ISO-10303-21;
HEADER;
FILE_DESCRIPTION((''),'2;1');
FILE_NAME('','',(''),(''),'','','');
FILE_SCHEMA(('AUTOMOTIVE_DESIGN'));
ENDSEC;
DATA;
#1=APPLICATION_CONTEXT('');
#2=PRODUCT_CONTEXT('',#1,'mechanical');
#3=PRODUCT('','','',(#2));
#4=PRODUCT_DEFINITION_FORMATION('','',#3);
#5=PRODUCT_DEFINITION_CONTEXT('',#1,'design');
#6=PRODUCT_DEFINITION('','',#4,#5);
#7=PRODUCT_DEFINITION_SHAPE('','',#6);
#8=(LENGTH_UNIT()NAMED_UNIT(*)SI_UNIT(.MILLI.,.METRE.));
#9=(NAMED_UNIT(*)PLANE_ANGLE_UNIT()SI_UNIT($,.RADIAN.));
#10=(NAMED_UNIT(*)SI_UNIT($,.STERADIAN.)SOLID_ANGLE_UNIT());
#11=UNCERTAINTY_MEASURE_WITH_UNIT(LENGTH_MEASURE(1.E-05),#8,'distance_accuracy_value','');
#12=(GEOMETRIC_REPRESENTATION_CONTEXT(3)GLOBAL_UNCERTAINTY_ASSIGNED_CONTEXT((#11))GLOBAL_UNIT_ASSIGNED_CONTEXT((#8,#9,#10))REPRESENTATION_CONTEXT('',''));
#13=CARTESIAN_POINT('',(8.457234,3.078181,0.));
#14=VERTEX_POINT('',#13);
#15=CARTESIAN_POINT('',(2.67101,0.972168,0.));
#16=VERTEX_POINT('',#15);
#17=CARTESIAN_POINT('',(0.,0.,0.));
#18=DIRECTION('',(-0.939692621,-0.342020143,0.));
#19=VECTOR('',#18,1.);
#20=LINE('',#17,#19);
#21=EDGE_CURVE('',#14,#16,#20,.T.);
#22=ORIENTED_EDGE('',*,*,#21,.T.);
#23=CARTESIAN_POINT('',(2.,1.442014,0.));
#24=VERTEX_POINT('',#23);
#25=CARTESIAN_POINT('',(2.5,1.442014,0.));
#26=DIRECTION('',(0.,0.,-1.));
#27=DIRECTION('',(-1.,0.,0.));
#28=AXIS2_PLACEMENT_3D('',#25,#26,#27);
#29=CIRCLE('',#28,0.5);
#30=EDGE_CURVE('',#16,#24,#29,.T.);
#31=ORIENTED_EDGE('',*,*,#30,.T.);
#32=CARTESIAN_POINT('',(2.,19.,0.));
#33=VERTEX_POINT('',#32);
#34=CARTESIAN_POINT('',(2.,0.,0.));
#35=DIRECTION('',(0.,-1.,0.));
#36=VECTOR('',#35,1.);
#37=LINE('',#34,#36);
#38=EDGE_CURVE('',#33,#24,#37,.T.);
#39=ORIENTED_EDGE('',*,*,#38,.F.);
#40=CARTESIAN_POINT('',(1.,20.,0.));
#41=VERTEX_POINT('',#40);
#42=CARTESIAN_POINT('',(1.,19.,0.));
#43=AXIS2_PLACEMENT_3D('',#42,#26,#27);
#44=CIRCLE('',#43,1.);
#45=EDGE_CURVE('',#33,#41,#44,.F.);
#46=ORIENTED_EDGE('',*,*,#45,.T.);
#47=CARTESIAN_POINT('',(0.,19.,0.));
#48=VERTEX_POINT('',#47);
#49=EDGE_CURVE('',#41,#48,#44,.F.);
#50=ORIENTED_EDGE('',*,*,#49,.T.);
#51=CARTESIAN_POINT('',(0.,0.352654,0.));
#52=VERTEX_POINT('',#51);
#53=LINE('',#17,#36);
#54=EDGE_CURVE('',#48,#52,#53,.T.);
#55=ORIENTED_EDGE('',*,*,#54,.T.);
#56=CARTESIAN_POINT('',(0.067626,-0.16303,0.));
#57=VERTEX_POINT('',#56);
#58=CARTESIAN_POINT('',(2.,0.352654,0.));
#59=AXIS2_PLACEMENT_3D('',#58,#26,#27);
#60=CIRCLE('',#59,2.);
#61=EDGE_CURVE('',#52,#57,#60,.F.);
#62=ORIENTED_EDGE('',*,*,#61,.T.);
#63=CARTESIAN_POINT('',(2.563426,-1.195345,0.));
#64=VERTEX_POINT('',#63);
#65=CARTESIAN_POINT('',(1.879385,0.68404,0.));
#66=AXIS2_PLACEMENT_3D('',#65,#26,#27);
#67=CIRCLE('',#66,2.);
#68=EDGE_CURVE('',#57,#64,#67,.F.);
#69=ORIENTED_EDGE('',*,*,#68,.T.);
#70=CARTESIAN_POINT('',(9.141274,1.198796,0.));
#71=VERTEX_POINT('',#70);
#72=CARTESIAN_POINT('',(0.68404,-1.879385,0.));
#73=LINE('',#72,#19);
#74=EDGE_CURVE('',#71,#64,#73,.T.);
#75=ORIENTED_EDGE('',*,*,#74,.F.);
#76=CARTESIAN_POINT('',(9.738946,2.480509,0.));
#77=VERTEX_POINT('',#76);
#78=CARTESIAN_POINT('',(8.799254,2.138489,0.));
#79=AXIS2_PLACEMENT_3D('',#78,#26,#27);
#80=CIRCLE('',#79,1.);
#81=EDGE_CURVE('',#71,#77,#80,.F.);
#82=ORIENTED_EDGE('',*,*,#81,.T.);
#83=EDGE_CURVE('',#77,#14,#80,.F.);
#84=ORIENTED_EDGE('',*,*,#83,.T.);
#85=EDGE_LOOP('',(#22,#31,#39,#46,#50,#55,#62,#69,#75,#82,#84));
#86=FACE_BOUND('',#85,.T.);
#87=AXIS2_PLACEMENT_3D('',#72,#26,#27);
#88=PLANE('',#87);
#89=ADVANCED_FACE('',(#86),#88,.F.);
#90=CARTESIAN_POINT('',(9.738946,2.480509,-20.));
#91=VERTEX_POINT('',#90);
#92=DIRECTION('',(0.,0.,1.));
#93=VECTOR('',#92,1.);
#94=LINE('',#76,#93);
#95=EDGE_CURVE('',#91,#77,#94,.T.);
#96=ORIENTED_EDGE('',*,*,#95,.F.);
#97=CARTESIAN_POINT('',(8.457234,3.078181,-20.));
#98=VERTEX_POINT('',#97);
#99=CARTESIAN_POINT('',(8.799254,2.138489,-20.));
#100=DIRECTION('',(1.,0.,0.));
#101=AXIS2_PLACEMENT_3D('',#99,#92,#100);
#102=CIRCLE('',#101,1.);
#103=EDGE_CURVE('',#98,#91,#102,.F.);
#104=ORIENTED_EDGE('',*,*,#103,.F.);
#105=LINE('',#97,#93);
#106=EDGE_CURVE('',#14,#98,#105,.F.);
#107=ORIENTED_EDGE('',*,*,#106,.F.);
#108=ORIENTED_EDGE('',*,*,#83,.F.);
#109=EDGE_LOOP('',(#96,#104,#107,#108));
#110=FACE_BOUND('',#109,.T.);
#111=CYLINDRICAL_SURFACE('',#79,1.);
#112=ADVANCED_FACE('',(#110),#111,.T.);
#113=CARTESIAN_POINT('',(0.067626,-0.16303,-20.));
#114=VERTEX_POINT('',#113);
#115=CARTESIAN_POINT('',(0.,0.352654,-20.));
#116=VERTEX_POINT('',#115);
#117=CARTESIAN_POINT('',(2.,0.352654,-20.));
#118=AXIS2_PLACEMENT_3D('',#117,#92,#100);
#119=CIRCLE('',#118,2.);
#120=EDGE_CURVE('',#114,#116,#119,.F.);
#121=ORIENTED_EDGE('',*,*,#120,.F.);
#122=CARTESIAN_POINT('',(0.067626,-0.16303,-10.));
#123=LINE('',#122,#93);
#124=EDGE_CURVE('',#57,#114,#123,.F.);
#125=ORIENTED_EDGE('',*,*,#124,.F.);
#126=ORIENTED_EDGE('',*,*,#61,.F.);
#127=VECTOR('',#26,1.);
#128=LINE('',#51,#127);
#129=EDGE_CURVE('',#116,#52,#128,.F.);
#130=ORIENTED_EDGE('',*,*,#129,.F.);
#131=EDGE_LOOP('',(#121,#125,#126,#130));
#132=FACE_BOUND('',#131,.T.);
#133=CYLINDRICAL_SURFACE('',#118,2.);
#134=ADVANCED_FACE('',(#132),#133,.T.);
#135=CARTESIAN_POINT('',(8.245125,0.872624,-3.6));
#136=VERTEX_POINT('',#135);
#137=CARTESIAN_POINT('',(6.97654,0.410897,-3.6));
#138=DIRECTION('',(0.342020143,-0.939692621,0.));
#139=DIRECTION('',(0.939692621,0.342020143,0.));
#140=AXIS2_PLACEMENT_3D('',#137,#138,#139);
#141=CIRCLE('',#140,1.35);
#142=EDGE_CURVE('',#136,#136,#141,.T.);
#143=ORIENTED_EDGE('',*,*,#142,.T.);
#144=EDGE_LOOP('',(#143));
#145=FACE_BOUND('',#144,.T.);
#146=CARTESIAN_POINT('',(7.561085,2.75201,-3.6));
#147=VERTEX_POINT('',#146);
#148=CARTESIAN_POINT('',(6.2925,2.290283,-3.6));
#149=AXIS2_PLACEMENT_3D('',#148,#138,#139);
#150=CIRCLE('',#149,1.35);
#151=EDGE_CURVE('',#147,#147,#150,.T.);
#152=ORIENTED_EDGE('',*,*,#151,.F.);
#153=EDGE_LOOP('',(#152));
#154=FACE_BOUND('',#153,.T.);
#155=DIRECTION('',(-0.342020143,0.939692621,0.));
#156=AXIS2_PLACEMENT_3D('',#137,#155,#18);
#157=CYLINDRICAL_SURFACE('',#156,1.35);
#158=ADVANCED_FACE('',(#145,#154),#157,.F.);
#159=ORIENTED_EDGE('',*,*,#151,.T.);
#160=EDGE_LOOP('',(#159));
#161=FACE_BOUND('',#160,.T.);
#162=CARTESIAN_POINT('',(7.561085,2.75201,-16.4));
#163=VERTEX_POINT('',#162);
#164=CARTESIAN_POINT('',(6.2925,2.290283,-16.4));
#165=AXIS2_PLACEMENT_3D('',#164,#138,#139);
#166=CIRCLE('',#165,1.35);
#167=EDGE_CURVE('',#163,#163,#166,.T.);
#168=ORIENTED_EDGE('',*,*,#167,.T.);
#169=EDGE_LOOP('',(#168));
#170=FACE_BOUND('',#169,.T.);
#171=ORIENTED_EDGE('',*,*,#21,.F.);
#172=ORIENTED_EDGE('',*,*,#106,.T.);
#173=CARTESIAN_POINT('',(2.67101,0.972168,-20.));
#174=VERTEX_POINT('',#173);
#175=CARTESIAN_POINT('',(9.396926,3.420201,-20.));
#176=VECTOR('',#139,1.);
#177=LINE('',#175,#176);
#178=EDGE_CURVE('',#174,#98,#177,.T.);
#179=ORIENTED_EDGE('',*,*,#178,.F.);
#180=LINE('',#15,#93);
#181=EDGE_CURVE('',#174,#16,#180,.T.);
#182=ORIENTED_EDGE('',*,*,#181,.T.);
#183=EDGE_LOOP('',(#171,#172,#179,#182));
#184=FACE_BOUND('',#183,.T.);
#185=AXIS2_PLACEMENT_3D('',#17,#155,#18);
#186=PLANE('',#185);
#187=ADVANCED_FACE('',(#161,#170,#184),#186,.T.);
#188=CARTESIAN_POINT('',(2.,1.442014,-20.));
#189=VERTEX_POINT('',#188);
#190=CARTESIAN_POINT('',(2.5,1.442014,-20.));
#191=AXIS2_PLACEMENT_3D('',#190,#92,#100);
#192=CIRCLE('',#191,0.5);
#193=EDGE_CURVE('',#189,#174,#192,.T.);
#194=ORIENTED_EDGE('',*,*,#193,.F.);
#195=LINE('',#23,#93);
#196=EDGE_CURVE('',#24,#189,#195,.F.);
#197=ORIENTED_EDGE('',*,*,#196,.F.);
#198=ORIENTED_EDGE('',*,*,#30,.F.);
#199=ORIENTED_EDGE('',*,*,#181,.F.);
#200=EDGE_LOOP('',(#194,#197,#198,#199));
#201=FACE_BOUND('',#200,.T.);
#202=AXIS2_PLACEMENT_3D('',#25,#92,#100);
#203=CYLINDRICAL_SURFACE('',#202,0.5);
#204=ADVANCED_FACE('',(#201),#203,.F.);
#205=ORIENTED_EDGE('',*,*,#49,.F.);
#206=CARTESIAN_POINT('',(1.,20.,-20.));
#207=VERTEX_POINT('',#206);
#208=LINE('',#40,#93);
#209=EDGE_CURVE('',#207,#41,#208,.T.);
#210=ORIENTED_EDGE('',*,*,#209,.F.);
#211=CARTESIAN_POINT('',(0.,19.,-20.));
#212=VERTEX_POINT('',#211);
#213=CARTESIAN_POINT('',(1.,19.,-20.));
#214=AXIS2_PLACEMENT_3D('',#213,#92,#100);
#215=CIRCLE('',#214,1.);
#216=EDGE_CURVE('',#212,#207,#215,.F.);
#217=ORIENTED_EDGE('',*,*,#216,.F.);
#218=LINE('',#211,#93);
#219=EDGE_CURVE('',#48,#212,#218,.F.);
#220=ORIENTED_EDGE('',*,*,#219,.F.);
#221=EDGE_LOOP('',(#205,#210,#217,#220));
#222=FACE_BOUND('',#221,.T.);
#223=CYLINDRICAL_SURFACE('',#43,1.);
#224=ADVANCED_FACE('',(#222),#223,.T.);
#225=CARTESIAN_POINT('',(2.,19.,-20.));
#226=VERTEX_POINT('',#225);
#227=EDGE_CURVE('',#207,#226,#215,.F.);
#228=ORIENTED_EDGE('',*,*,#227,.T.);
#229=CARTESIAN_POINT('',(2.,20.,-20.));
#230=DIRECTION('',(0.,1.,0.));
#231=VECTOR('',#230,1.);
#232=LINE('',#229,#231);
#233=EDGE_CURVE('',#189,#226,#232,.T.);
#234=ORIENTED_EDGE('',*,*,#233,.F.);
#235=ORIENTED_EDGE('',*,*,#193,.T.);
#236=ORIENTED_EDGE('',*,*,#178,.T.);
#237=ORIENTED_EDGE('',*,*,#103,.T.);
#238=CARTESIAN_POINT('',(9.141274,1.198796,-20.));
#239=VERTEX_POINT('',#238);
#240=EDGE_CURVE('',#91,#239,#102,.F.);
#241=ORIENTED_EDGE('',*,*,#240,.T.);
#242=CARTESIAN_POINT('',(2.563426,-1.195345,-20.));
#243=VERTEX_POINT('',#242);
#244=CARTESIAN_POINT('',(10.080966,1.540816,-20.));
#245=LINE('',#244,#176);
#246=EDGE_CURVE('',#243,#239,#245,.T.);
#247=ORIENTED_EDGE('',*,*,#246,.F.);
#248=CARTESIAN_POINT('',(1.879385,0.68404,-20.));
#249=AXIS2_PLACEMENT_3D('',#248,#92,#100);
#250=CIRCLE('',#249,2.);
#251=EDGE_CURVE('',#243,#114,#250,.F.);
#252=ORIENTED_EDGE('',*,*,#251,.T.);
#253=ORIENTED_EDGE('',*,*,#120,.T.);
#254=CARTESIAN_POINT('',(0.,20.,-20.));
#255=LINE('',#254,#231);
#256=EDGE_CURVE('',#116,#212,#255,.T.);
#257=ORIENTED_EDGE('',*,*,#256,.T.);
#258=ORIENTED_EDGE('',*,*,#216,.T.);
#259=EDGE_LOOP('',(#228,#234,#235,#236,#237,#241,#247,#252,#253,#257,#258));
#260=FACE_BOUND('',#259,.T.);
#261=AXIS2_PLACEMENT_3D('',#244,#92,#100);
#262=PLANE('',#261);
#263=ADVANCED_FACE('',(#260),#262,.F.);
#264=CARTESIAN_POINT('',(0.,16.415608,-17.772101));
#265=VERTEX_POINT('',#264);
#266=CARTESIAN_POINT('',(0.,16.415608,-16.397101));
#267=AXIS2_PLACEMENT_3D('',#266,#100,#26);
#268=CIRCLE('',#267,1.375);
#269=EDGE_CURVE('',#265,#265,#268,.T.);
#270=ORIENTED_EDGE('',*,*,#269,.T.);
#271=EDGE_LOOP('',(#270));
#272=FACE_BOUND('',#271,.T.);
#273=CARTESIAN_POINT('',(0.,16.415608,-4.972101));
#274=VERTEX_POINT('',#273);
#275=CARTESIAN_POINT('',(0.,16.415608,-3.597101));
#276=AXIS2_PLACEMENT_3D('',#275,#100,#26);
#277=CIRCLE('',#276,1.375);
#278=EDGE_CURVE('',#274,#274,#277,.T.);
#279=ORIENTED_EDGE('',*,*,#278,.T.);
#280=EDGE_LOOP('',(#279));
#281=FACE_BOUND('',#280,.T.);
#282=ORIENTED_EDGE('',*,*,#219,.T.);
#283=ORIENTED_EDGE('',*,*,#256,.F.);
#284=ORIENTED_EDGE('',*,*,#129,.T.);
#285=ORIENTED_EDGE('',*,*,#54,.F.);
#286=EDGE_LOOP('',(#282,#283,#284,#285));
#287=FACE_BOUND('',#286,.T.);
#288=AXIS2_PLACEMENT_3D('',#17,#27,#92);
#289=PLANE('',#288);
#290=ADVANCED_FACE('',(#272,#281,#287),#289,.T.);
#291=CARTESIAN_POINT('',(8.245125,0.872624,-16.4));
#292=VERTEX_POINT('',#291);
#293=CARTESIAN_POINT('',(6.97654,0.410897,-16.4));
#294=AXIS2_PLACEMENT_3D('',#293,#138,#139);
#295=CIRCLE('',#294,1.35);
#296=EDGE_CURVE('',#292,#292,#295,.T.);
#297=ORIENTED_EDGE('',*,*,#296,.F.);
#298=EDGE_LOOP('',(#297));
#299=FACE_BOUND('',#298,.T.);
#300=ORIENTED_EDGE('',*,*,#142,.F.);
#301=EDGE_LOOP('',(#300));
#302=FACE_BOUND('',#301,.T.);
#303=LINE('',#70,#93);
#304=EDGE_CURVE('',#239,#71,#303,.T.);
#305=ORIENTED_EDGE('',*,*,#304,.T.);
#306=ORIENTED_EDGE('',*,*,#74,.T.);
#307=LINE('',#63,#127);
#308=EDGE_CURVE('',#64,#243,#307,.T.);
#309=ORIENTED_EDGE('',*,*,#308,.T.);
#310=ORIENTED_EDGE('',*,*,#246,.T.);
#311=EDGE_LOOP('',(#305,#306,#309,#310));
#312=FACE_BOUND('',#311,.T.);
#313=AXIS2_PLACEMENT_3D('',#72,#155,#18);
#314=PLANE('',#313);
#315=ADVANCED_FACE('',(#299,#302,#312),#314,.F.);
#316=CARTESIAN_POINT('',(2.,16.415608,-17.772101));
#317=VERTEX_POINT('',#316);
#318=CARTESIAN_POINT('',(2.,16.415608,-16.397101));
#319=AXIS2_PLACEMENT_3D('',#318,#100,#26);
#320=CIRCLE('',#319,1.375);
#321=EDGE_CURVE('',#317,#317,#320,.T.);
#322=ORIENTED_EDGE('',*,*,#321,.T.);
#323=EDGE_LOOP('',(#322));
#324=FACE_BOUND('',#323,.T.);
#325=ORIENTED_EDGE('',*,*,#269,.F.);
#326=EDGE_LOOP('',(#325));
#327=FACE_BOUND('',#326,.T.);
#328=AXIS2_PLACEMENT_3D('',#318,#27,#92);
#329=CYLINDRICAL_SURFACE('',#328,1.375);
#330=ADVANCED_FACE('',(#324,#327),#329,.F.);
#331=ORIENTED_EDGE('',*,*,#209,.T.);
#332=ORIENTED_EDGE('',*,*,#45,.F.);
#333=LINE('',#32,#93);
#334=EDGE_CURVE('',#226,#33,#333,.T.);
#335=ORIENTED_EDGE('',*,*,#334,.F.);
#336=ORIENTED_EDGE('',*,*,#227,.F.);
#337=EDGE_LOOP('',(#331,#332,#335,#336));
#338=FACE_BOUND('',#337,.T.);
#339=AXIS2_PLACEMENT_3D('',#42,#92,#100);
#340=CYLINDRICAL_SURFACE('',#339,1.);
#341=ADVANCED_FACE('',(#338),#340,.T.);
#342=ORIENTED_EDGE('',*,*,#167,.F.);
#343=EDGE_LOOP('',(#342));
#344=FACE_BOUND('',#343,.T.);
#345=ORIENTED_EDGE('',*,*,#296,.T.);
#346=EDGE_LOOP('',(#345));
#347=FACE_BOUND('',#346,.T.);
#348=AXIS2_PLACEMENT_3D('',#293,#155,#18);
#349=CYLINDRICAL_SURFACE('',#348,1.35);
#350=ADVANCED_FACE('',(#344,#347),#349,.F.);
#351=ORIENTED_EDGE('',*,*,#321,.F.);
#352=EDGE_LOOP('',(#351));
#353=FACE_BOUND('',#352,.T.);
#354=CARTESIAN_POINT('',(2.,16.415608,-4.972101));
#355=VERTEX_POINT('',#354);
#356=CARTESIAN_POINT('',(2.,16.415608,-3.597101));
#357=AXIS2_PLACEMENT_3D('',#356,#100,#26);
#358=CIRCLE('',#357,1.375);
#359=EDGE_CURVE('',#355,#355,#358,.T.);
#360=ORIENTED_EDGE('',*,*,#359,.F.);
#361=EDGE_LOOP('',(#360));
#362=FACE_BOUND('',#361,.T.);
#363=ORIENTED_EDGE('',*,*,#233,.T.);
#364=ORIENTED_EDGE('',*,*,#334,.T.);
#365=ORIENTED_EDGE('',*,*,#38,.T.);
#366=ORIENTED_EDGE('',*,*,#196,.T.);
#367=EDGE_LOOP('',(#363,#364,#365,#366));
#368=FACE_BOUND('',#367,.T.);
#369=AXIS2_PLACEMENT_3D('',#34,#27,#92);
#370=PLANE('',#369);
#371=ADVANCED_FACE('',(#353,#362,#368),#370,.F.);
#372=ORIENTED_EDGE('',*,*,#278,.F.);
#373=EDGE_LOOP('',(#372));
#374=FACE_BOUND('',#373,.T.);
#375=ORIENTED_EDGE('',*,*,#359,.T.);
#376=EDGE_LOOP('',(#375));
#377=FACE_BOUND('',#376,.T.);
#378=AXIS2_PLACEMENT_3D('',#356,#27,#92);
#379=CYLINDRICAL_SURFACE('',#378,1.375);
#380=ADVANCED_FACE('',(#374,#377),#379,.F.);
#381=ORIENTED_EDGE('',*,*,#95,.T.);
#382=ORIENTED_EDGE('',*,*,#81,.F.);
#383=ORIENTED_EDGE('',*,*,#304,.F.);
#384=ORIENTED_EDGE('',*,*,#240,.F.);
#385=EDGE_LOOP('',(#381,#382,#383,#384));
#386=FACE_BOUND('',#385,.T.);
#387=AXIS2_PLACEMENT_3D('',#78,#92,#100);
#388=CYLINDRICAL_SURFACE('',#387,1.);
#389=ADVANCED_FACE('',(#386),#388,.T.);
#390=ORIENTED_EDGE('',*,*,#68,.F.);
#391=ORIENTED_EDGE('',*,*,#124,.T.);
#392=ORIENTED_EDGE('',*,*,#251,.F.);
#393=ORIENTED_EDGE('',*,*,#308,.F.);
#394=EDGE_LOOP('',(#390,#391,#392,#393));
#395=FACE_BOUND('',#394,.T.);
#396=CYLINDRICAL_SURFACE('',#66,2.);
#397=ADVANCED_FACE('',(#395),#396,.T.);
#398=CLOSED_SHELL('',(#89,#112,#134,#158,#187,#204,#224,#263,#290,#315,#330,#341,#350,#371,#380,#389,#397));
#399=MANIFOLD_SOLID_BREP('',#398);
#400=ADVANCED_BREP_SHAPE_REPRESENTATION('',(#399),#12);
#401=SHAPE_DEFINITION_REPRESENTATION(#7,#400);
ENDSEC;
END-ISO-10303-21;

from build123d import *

# Parameters (mm, degrees)
SKETCH3_W           = 20
SKETCH3_H           = 10
SKETCH3_R           = 1.35
BOSS_EXTRUDE1_DEPTH = 2
SKETCH2_W           = 20
SKETCH2_H           = 20
SKETCH2_R           = 1.375
BOSS_EXTRUDE2_DEPTH = 2
FILLET1_R           = 2
FILLET2_R           = 0.5
FILLET3_R           = 1
FILLET4_R           = 1


# Some blends are built 0.0001 mm under size
with BuildPart() as part:
    # Sketch3 → Boss-Extrude1 (new body)
    with BuildSketch(Plane(origin=(0, 0, 0), x_dir=(0, 0, -1), z_dir=(0.34202014332566616, -0.9396926207859094, 0))):
        with Locations((10, 5)):
            Rectangle(SKETCH3_W, SKETCH3_H)
        with Locations(Location((3.6, 6.69633816, 0), (0, 0, 90))):
            Circle(SKETCH3_R, mode=Mode.SUBTRACT)
        with Locations(Location((16.4, 6.69633816, 0), (0, 0, 90))):
            Circle(SKETCH3_R, mode=Mode.SUBTRACT)
    extrude(amount=BOSS_EXTRUDE1_DEPTH)

    # Sketch2 → Boss-Extrude2 (add)
    with BuildSketch(Plane(origin=(0, 0, 0), x_dir=(0, 0, -1), z_dir=(1, 0, 0))):
        with Locations((10, 10)):
            Rectangle(SKETCH2_W, SKETCH2_H)
        with Locations((3.597100601, 16.415608196)):
            Circle(SKETCH2_R, mode=Mode.SUBTRACT)
        with Locations((16.397100601, 16.415608196)):
            Circle(SKETCH2_R, mode=Mode.SUBTRACT)
    extrude(amount=BOSS_EXTRUDE2_DEPTH)

    # Fillet1
    # the kernel refuses this fillet: 2 mm, written as the material it takes off along each edge
    with BuildSketch(Plane(origin=(0.684040287, -1.879385242, -25), x_dir=(0.9396926207859093, 0.34202014332566616, 0), z_dir=(0, 0, 1))) as fillet1_piece_1:
        with BuildLine():
            CenterArc((FILLET1_R, FILLET1_R), FILLET1_R, 180, 90)
            Line((0, FILLET1_R), (0, 0))
            Line((0, 0), (FILLET1_R, 0))
        make_face()
    extrude(amount=30, mode=Mode.SUBTRACT)
    with BuildSketch(Plane(origin=(0, 0, -20.881634904), x_dir=(0.34202014332566616, -0.9396926207859093, 0), z_dir=(0, 0, 1))) as fillet1_piece_2:
        with BuildLine():
            CenterArc((FILLET1_R * 0.176326980708, FILLET1_R), FILLET1_R, 250, 20)
            Line((-FILLET1_R * 0.165693162617, FILLET1_R * 0.0603073792141), (0, 0))
            Line((0, 0), (FILLET1_R * 0.176326980708, 0))
        make_face()
    extrude(amount=21.763269807, mode=Mode.SUBTRACT)

    # Fillet2
    fillet2_edges = [part.edges().sort_by_distance(p)[0] for p in [
        (2, 0.727940469, -10),
    ]]
    fillet(fillet2_edges, radius=FILLET2_R)

    # Fillet3
    fillet3_edges = [part.edges().sort_by_distance(p)[0] for p in [
        (2, 20, -10),
        (0, 20, -10),
    ]]
    fillet(fillet3_edges, radius=FILLET3_R - 0.0001)  # a hair under: the kernel refuses the full size

    # Fillet4
    fillet4_edges = [part.edges().sort_by_distance(p)[0] for p in [
        (10.080966495, 1.540816192, -10),
        (9.396926208, 3.420201433, -10),
    ]]
    fillet(fillet4_edges, radius=FILLET4_R - 0.0001)  # a hair under: the kernel refuses the full size


solid = part.part
